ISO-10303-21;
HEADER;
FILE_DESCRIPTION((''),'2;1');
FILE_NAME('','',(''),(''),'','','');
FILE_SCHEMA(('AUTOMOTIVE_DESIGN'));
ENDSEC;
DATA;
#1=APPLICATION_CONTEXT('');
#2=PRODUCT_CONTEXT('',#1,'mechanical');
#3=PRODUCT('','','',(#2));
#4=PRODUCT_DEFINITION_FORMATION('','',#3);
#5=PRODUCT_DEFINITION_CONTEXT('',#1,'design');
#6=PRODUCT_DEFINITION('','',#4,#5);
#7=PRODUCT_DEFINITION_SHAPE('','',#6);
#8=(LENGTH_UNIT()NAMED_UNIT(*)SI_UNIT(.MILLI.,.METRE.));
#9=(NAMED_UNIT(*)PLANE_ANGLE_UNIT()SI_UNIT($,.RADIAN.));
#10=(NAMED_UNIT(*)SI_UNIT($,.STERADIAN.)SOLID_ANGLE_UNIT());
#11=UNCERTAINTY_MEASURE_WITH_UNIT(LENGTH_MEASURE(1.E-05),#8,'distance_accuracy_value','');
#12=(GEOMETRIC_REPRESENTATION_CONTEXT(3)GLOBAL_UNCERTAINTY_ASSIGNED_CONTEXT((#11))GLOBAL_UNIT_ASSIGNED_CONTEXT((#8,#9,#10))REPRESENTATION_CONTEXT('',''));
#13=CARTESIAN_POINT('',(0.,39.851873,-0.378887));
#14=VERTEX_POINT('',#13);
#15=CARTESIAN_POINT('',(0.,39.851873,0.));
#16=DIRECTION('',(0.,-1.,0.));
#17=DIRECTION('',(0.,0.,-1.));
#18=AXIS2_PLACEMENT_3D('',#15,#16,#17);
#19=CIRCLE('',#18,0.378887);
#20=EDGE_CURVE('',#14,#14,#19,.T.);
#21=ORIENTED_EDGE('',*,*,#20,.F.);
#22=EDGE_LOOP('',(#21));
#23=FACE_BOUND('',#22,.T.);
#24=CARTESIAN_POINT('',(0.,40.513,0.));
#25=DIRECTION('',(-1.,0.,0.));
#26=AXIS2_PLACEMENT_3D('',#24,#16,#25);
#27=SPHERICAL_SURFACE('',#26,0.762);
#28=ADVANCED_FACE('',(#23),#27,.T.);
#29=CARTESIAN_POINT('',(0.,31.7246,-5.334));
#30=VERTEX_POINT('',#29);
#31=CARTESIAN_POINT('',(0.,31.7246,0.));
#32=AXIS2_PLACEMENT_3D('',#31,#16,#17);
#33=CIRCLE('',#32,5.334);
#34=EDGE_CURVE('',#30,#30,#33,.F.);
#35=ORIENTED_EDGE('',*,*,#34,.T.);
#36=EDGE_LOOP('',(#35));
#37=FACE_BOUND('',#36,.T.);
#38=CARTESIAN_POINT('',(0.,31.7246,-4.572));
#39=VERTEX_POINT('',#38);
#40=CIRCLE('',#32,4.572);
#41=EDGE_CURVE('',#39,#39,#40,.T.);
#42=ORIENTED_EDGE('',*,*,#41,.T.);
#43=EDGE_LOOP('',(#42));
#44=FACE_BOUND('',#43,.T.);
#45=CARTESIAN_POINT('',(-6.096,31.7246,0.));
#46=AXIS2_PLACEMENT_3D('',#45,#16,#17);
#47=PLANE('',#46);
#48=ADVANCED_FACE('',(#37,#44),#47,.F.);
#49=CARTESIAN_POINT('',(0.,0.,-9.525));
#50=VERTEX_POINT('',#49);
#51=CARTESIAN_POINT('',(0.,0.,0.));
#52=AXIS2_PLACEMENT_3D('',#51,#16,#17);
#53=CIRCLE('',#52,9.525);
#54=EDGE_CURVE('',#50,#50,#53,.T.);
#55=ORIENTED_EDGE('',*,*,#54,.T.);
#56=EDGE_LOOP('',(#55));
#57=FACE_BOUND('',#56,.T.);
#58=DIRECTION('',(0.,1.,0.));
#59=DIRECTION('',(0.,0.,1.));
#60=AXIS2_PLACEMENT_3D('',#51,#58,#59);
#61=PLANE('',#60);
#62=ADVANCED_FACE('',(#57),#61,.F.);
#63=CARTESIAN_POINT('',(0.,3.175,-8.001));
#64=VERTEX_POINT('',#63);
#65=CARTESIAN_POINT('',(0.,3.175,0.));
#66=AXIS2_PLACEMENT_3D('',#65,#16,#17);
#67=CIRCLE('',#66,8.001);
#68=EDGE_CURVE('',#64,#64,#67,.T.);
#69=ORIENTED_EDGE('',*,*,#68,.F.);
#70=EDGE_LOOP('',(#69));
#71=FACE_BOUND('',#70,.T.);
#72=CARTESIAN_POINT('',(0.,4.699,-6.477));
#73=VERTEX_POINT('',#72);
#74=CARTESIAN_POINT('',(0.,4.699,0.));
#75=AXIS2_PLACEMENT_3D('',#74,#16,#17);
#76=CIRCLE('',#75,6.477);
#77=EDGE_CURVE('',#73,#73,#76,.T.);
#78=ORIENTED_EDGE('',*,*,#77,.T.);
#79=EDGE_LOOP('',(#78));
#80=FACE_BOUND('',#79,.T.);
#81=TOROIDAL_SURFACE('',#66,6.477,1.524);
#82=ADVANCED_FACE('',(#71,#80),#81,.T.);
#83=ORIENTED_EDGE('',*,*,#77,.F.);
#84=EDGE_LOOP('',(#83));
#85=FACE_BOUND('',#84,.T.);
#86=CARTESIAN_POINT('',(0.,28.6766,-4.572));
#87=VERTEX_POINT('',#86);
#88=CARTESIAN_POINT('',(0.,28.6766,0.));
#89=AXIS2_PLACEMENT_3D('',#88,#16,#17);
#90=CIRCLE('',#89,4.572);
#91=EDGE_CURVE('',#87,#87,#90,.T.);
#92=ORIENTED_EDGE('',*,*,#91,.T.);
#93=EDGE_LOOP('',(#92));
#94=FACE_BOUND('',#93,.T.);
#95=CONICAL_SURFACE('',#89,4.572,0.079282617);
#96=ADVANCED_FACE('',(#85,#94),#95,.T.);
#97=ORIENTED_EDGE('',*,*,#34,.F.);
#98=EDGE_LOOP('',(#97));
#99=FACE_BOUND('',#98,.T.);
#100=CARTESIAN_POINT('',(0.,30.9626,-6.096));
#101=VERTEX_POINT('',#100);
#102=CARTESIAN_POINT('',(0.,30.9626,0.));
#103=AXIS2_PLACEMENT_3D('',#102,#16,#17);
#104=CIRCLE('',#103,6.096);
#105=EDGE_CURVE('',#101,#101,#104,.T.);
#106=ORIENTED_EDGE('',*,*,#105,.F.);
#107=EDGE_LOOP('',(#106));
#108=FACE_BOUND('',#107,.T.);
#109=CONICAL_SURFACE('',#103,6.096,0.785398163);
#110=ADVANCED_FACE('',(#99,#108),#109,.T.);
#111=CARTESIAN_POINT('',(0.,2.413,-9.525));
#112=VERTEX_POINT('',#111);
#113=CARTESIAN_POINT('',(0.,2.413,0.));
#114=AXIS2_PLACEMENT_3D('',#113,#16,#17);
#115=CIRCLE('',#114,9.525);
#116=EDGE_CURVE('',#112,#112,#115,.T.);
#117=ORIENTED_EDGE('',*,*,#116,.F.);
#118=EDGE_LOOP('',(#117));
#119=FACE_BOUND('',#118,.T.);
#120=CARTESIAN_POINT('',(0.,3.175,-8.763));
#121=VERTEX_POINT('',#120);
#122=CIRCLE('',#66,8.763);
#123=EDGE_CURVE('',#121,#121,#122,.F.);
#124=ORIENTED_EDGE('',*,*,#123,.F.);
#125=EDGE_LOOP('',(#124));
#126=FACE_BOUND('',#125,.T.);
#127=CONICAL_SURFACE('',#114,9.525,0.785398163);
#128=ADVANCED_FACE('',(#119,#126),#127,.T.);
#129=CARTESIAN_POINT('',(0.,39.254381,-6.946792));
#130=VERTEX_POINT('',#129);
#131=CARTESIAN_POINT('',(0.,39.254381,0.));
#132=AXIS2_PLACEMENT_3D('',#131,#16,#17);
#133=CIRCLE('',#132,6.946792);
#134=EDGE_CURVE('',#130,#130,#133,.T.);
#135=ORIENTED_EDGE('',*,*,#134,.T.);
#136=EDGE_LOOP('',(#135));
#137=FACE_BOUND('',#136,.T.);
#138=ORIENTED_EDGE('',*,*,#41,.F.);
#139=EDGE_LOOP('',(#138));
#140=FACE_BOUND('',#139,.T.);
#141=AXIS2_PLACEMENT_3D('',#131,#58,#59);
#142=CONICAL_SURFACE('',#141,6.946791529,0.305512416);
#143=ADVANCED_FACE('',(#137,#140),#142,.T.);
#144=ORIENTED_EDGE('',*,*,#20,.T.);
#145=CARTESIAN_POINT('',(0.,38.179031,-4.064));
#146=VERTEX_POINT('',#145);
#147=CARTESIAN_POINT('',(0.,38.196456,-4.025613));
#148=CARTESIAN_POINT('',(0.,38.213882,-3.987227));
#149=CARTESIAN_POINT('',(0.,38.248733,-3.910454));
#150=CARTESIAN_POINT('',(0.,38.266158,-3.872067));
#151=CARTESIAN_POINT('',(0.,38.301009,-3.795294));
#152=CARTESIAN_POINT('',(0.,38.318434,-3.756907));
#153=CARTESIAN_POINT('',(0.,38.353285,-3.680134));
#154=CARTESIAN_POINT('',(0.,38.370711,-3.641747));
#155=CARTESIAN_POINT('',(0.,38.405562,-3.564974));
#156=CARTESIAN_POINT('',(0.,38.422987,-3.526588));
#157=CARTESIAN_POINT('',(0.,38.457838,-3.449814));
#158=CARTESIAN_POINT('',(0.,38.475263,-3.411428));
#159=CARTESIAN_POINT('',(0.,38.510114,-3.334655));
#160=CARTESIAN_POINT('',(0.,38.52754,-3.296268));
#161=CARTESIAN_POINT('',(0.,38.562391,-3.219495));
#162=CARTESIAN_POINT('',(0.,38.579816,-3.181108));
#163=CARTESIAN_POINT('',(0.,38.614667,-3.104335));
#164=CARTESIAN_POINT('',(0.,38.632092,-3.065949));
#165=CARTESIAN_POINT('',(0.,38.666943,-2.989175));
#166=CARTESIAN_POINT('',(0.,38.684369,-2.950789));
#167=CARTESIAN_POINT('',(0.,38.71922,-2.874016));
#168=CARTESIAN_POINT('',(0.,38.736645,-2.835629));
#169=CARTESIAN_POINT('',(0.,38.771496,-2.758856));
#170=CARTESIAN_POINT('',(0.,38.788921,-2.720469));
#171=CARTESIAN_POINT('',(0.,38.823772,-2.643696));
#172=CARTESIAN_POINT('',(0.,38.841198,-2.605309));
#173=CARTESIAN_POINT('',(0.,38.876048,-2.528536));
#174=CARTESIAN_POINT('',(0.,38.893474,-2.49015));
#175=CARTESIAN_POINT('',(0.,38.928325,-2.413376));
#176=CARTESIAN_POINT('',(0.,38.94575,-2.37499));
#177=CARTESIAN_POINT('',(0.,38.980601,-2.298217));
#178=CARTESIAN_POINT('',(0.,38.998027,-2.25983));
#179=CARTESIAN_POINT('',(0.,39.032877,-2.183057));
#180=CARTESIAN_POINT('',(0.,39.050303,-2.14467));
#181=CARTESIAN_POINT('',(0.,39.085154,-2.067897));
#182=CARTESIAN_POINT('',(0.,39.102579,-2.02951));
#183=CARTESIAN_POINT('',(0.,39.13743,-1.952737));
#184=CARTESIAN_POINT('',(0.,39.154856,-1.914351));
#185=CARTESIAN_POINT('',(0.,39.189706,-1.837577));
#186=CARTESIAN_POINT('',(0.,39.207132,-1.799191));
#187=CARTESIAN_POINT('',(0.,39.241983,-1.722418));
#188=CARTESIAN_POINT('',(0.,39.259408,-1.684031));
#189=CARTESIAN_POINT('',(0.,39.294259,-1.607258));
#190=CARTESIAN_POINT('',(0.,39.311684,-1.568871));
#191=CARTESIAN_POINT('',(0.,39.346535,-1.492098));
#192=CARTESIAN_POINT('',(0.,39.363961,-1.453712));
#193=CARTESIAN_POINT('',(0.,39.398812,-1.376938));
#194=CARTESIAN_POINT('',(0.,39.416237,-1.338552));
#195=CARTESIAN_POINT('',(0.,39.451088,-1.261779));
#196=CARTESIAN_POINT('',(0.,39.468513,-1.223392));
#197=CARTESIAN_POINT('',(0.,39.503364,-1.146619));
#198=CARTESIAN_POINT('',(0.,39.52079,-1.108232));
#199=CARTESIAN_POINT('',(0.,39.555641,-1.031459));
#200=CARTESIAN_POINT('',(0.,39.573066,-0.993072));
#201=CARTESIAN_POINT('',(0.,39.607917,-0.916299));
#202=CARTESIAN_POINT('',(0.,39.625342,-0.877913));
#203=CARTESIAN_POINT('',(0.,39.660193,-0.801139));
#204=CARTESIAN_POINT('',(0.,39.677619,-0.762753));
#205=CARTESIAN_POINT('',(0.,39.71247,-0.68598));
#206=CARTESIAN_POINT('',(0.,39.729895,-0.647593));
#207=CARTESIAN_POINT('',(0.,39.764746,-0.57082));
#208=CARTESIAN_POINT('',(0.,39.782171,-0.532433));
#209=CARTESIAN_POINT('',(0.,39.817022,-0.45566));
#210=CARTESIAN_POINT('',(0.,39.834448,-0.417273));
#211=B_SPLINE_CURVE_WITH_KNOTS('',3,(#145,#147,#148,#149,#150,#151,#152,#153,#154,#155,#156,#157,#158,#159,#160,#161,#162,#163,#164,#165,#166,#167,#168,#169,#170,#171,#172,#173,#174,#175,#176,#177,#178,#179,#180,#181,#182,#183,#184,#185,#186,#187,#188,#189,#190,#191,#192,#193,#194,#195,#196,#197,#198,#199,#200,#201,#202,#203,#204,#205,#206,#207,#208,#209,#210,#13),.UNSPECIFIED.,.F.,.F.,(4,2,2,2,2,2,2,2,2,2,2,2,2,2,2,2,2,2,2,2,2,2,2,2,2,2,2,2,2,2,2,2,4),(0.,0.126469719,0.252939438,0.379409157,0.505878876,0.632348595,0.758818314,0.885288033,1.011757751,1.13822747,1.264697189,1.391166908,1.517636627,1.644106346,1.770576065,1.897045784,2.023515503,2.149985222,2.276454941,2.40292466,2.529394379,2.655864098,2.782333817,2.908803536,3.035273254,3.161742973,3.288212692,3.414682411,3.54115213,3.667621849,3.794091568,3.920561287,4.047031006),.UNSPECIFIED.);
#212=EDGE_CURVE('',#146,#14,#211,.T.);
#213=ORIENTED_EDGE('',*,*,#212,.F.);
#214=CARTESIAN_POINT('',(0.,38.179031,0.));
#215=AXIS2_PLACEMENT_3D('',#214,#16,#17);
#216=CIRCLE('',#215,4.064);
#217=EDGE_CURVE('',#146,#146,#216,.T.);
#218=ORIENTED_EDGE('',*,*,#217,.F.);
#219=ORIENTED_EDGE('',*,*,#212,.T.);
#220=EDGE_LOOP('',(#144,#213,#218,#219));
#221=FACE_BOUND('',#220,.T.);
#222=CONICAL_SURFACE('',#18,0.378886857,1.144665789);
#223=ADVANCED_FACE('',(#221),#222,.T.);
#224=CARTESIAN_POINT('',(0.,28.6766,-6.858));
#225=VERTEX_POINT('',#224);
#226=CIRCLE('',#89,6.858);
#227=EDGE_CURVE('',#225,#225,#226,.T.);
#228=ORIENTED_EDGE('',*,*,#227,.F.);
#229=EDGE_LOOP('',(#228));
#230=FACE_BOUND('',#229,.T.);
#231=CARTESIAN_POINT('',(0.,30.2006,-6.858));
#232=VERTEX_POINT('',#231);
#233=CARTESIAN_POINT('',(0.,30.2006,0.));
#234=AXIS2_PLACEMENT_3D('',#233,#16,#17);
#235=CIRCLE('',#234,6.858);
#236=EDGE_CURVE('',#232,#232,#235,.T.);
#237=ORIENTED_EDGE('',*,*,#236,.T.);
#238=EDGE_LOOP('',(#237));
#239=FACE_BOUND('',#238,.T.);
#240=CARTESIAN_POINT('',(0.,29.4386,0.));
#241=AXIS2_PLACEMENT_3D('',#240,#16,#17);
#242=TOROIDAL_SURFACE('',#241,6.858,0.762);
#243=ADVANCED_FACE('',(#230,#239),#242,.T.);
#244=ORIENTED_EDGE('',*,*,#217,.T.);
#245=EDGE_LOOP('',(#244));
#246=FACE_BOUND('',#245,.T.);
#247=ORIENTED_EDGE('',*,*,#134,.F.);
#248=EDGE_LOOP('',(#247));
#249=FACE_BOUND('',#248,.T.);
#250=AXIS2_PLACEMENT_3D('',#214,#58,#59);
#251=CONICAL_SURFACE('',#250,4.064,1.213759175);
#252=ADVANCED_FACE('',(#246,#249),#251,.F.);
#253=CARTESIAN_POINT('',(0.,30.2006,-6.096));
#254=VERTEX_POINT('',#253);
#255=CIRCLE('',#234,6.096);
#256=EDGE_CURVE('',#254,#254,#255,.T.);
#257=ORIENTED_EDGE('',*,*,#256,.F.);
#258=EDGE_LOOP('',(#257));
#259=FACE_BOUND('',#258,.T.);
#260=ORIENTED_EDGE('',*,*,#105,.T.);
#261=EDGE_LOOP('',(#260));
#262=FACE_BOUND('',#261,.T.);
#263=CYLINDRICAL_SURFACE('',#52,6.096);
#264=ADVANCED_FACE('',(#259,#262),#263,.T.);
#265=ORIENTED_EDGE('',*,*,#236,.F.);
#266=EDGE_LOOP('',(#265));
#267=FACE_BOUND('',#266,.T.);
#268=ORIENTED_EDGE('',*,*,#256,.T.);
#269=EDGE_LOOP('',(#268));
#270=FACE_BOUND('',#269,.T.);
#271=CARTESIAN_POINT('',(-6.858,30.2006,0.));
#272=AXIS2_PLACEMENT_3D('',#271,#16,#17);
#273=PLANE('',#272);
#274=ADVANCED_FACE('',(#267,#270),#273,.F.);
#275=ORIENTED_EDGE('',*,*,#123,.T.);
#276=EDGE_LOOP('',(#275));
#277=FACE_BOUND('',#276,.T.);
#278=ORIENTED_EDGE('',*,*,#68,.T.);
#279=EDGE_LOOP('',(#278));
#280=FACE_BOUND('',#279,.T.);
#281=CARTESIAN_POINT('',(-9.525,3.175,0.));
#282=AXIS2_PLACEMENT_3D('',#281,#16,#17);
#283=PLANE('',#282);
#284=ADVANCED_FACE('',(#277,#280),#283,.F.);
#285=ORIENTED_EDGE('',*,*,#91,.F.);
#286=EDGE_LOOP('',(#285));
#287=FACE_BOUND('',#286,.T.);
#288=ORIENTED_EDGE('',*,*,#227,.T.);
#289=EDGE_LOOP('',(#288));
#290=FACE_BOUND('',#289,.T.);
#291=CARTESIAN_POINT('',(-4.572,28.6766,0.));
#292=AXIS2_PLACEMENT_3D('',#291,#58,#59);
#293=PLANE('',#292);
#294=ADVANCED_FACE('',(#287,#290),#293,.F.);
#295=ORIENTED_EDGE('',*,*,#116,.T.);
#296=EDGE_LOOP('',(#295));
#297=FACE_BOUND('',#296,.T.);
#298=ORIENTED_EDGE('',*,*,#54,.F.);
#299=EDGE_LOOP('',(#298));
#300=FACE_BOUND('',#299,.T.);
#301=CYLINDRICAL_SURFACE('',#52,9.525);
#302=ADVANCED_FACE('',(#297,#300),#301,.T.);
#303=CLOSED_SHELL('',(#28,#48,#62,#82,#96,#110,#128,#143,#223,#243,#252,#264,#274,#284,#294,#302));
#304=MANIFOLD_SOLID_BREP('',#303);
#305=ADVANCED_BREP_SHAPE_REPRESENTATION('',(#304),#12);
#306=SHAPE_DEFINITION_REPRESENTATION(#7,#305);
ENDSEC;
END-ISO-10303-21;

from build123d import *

# Parameters (mm, degrees)
FILLET1_R     = 1.524
CHAMFER1_SIZE = 0.762
CHAMFER2_SIZE = 0.762


with BuildPart() as part:
    # Sketch2 → Revolve1 (revolve)
    with BuildSketch(Plane.XY, mode=Mode.PRIVATE) as revolve1_sk:
        with BuildLine():
            Line((0, 0), (0, 41.275))
            ThreePointArc((0, 41.275), (-0.736350012, 40.709042493), (-0.378886857, 39.851873121))
            Line((-0.378886857, 39.851873121), (-4.064, 38.179030904))
            Line((-4.064, 38.179030904), (-6.946791529, 39.254381297))
            Line((-6.946791529, 39.254381297), (-4.572, 31.7246))
            Line((-4.572, 31.7246), (-6.096, 31.7246))
            Line((-6.096, 31.7246), (-6.096, 30.2006))
            Line((-6.096, 30.2006), (-6.858, 30.2006))
            ThreePointArc((-6.858, 30.2006), (-7.62, 29.4386), (-6.858, 28.6766))
            Line((-6.858, 28.6766), (-4.572, 28.6766))
            Line((-4.572, 28.6766), (-6.477, 4.699))
            Line((-6.477, 4.699), (-8.001, 4.699))
            Line((-8.001, 4.699), (-8.001, 3.175))
            Line((-8.001, 3.175), (-9.525, 3.175))
            Line((-9.525, 3.175), (-9.525, 0))
            Line((-9.525, 0), (0, 0))
        make_face()
    revolve(revolve1_sk.sketch.rotate(Axis((0, 0, 0), (0, 1, 0)), 270), axis=Axis((0, 0, 0), (0, 1, 0)))

    # Fillet1
    fillet1_edges = [part.edges().sort_by_distance(p)[0] for p in [
        (0, 4.699, 8.001),
    ]]
    fillet(fillet1_edges, radius=FILLET1_R - 0.0001)  # a hair under: the kernel refuses the full size

    # Chamfer1
    chamfer1_edges = [part.edges().sort_by_distance(p)[0] for p in [
        (0, 3.175, 9.525),
    ]]
    chamfer(chamfer1_edges, length=CHAMFER1_SIZE)

    # Chamfer2
    chamfer2_edges = [part.edges().sort_by_distance(p)[0] for p in [
        (0, 31.7246, 6.096),
    ]]
    chamfer(chamfer2_edges, length=CHAMFER2_SIZE)


solid = part.part
